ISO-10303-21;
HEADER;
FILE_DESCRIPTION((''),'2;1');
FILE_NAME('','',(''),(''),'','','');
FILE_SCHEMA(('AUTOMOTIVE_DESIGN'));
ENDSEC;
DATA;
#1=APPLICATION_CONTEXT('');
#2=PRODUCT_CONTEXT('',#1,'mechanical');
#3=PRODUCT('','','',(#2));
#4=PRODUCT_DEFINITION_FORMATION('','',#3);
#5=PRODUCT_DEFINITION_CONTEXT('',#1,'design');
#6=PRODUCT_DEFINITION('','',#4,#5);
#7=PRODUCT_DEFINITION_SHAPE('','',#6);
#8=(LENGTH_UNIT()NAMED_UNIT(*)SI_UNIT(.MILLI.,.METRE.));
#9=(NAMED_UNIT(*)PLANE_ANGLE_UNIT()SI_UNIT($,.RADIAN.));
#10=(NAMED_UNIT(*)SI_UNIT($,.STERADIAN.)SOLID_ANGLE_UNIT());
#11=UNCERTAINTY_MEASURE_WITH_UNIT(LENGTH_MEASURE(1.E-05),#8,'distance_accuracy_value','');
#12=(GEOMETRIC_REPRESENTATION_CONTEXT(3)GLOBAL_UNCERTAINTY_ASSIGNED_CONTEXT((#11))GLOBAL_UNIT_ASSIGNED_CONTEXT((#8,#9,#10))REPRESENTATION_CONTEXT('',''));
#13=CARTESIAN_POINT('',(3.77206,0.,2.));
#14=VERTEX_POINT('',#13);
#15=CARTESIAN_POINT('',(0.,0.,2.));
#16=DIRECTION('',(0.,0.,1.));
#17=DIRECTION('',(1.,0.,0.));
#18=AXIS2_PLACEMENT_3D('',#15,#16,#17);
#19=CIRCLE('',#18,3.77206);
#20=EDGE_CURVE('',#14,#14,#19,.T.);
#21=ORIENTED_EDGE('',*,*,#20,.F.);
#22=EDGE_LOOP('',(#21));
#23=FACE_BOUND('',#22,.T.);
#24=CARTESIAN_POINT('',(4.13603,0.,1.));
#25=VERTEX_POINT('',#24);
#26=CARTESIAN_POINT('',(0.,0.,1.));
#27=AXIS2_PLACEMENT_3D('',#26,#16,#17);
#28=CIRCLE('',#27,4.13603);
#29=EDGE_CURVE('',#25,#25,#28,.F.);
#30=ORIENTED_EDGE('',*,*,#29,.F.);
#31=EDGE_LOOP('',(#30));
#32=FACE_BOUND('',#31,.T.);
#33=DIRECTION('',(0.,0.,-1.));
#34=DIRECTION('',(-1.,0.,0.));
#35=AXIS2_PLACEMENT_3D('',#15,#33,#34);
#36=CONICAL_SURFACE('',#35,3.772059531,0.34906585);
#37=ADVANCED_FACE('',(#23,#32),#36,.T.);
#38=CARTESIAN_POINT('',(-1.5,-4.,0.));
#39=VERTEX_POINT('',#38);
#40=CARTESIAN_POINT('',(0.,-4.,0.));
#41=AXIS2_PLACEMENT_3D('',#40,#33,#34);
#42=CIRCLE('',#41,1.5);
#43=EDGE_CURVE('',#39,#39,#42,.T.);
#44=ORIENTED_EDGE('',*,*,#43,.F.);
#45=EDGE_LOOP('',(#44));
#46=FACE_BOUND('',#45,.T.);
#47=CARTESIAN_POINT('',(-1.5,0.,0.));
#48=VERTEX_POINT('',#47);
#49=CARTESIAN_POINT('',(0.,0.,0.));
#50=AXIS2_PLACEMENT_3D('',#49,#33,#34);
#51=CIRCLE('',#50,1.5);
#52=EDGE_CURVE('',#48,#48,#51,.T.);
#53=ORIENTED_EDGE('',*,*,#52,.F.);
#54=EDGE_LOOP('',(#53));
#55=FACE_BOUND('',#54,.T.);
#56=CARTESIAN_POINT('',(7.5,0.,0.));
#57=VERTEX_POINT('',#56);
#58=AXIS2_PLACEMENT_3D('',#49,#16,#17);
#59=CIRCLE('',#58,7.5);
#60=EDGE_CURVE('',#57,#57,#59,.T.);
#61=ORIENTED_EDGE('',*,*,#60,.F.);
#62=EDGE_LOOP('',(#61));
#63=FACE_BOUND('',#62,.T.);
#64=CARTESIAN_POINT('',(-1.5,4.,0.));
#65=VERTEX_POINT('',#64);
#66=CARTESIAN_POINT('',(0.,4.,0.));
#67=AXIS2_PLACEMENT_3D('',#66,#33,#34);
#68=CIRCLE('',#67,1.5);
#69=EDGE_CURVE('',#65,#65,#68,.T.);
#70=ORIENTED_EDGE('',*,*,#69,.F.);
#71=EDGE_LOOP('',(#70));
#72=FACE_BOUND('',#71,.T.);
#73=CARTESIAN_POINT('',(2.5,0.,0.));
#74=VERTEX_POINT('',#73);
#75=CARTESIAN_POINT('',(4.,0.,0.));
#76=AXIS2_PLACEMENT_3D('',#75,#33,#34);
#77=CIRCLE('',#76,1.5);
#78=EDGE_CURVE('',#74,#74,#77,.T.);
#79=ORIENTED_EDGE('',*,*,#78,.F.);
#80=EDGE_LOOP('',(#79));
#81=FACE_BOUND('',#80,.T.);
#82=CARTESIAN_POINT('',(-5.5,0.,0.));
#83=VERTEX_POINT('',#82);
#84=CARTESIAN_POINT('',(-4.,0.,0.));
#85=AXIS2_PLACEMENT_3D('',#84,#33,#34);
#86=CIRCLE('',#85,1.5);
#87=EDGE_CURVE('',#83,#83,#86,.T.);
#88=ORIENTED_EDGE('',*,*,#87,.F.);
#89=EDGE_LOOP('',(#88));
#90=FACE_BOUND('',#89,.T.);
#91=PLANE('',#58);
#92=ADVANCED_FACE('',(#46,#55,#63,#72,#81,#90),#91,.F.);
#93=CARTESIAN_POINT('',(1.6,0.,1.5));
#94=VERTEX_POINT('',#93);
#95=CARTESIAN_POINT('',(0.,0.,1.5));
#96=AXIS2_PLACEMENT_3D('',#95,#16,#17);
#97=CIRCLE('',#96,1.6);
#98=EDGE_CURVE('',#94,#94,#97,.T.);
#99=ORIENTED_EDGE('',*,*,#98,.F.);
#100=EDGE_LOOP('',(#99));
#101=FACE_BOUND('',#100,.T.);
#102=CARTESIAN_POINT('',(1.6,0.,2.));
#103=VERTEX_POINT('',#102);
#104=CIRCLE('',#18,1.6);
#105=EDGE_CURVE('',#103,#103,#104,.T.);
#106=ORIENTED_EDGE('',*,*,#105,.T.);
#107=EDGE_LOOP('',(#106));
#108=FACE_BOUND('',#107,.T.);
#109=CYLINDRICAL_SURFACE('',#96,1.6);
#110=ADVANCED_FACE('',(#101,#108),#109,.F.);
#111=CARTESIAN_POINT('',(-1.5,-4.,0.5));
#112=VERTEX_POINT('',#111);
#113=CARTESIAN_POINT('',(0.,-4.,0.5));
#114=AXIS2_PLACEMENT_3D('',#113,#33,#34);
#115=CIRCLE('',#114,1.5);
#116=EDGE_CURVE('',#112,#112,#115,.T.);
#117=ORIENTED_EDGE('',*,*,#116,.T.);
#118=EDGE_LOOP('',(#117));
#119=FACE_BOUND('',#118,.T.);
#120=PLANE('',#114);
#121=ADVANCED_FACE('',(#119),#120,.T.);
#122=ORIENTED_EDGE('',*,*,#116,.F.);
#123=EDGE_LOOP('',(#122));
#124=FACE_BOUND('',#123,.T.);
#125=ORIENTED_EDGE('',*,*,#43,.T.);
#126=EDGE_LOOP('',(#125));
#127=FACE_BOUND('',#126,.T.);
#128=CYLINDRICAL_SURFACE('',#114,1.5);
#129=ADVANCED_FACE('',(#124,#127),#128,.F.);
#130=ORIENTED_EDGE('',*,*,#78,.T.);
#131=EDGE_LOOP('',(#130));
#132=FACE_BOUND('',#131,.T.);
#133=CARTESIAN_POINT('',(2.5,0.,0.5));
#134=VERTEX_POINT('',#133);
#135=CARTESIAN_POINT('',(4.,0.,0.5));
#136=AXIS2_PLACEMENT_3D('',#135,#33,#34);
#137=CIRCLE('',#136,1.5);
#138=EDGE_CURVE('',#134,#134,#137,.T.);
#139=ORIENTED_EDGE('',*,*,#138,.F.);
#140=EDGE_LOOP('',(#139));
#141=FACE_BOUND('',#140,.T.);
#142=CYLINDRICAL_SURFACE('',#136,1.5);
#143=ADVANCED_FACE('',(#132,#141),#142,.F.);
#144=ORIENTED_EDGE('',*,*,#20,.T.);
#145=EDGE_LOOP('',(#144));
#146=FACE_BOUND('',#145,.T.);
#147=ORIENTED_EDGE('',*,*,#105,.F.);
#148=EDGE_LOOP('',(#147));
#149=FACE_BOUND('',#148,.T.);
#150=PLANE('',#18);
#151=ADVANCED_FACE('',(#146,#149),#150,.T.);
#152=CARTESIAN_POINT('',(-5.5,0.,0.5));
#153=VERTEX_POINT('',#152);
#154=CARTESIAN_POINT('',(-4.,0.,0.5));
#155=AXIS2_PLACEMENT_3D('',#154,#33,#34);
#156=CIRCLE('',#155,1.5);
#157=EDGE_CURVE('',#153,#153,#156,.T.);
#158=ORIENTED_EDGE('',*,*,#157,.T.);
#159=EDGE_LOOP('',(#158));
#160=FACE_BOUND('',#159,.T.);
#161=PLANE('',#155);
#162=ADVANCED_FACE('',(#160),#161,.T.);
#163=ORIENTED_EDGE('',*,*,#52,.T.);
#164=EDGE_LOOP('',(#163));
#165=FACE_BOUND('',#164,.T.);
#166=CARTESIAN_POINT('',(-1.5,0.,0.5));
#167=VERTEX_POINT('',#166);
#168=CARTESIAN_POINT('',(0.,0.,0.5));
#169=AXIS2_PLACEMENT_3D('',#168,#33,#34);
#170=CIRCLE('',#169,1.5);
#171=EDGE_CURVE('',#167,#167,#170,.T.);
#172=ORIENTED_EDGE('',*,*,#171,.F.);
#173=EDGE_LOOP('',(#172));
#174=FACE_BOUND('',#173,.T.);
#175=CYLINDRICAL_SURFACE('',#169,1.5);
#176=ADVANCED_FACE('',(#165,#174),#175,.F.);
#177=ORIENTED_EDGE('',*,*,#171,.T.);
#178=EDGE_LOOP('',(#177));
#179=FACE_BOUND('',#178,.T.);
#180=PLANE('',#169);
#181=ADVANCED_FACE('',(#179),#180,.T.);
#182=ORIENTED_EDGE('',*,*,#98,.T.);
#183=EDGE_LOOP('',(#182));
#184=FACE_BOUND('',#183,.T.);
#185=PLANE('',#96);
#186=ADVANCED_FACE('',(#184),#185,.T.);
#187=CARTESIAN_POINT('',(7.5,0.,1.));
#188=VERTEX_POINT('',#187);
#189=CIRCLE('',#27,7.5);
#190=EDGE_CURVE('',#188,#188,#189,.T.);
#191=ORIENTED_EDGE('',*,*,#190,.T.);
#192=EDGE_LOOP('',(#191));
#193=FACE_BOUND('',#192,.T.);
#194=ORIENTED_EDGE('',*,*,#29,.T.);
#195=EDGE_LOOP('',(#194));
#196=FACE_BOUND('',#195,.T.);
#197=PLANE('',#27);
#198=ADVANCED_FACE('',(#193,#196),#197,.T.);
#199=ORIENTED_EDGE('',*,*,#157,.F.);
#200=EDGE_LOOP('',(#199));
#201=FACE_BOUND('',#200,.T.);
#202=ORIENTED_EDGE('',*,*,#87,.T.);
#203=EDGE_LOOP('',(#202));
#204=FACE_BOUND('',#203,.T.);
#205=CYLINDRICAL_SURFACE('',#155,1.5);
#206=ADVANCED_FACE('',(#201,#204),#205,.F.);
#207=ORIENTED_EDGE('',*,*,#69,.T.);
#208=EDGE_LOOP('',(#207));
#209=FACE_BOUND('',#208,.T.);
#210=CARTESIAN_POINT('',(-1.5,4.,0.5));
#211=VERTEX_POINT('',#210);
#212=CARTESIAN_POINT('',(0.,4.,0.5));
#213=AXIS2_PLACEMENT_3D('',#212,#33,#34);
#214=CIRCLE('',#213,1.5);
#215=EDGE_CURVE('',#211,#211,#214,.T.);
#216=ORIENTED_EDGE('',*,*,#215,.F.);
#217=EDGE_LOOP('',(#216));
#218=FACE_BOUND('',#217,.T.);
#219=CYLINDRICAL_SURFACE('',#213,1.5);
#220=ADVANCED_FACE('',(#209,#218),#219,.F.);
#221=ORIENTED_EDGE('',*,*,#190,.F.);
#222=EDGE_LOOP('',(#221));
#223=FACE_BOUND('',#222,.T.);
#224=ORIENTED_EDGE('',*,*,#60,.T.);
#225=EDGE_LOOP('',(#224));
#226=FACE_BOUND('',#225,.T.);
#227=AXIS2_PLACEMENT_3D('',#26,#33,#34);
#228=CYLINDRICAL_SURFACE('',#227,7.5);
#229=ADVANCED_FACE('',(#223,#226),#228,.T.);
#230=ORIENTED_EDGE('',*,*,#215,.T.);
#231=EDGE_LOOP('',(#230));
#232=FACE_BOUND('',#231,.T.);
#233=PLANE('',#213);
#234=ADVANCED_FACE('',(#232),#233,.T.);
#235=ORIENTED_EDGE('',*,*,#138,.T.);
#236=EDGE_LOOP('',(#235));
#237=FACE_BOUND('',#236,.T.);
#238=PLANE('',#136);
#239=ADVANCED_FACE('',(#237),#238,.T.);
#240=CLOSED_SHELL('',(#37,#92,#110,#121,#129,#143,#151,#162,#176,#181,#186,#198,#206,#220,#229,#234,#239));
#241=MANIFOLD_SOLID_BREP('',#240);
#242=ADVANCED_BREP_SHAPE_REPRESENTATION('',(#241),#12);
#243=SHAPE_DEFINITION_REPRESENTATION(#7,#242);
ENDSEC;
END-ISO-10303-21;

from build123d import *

# Parameters (mm, degrees)
SKETCH1_R           = 7.5
BOSS_EXTRUDE1_DEPTH = 1
SKETCH4_R           = 4.5
BOSS_EXTRUDE2_DEPTH = 1
SKETCH5_R           = 1.6
CUT_EXTRUDE2_DEPTH  = 0.5
CHAMFER4_SIZE       = 2
CHAMFER4_SIZE_2     = 0.727940469
SKETCH6_R           = 1.5
CUT_EXTRUDE3_DEPTH  = 0.5


with BuildPart() as part:
    # Sketch1 → Boss-Extrude1 (new body)
    with BuildSketch(Plane.XY):
        Circle(SKETCH1_R)
    extrude(amount=BOSS_EXTRUDE1_DEPTH)

    # Sketch4 → Boss-Extrude2 (add)
    with BuildSketch(Plane.XY.offset(1)):
        Circle(SKETCH4_R)
    extrude(amount=BOSS_EXTRUDE2_DEPTH)

    # Sketch5 → Cut-Extrude2 (cut)
    with BuildSketch(Plane.XY.offset(2)):
        Circle(SKETCH5_R)
    extrude(amount=-CUT_EXTRUDE2_DEPTH, mode=Mode.SUBTRACT)

    # Chamfer4
    # the kernel refuses this chamfer: 2, 0.727940469 mm, written as the material it takes off along each edge
    with BuildSketch(Plane(origin=(0, 0, 2), x_dir=(1, 0, 0), z_dir=(0, -1, 0))) as chamfer4_piece_1_section:
        Polygon((4.5, -CHAMFER4_SIZE), (4.5 - CHAMFER4_SIZE_2, 0), (4.5, 0), align=None)
    chamfer4_piece_1 = revolve(axis=Axis((0, 0, 2), (0, 0, 1)), mode=Mode.PRIVATE)
    chamfer4_piece_1 = split(chamfer4_piece_1, bisect_by=Plane(origin=(-3.964304639, 0, 1), z_dir=(0, 0, 1)), keep=Keep.TOP, mode=Mode.PRIVATE)
    add(chamfer4_piece_1, mode=Mode.SUBTRACT)

    # Sketch6 → Cut-Extrude3 (cut)
    with BuildSketch(Plane(origin=(0, 0, 0), x_dir=(-1, 0, 0), z_dir=(0, 0, -1))):
        Circle(SKETCH6_R)
        with Locations((-4, 0)):
            Circle(SKETCH6_R)
        with Locations((0, 4)):
            Circle(SKETCH6_R)
        with Locations((4, 0)):
            Circle(SKETCH6_R)
        with Locations((0, -4)):
            Circle(SKETCH6_R)
    extrude(amount=-CUT_EXTRUDE3_DEPTH, mode=Mode.SUBTRACT)


solid = part.part
